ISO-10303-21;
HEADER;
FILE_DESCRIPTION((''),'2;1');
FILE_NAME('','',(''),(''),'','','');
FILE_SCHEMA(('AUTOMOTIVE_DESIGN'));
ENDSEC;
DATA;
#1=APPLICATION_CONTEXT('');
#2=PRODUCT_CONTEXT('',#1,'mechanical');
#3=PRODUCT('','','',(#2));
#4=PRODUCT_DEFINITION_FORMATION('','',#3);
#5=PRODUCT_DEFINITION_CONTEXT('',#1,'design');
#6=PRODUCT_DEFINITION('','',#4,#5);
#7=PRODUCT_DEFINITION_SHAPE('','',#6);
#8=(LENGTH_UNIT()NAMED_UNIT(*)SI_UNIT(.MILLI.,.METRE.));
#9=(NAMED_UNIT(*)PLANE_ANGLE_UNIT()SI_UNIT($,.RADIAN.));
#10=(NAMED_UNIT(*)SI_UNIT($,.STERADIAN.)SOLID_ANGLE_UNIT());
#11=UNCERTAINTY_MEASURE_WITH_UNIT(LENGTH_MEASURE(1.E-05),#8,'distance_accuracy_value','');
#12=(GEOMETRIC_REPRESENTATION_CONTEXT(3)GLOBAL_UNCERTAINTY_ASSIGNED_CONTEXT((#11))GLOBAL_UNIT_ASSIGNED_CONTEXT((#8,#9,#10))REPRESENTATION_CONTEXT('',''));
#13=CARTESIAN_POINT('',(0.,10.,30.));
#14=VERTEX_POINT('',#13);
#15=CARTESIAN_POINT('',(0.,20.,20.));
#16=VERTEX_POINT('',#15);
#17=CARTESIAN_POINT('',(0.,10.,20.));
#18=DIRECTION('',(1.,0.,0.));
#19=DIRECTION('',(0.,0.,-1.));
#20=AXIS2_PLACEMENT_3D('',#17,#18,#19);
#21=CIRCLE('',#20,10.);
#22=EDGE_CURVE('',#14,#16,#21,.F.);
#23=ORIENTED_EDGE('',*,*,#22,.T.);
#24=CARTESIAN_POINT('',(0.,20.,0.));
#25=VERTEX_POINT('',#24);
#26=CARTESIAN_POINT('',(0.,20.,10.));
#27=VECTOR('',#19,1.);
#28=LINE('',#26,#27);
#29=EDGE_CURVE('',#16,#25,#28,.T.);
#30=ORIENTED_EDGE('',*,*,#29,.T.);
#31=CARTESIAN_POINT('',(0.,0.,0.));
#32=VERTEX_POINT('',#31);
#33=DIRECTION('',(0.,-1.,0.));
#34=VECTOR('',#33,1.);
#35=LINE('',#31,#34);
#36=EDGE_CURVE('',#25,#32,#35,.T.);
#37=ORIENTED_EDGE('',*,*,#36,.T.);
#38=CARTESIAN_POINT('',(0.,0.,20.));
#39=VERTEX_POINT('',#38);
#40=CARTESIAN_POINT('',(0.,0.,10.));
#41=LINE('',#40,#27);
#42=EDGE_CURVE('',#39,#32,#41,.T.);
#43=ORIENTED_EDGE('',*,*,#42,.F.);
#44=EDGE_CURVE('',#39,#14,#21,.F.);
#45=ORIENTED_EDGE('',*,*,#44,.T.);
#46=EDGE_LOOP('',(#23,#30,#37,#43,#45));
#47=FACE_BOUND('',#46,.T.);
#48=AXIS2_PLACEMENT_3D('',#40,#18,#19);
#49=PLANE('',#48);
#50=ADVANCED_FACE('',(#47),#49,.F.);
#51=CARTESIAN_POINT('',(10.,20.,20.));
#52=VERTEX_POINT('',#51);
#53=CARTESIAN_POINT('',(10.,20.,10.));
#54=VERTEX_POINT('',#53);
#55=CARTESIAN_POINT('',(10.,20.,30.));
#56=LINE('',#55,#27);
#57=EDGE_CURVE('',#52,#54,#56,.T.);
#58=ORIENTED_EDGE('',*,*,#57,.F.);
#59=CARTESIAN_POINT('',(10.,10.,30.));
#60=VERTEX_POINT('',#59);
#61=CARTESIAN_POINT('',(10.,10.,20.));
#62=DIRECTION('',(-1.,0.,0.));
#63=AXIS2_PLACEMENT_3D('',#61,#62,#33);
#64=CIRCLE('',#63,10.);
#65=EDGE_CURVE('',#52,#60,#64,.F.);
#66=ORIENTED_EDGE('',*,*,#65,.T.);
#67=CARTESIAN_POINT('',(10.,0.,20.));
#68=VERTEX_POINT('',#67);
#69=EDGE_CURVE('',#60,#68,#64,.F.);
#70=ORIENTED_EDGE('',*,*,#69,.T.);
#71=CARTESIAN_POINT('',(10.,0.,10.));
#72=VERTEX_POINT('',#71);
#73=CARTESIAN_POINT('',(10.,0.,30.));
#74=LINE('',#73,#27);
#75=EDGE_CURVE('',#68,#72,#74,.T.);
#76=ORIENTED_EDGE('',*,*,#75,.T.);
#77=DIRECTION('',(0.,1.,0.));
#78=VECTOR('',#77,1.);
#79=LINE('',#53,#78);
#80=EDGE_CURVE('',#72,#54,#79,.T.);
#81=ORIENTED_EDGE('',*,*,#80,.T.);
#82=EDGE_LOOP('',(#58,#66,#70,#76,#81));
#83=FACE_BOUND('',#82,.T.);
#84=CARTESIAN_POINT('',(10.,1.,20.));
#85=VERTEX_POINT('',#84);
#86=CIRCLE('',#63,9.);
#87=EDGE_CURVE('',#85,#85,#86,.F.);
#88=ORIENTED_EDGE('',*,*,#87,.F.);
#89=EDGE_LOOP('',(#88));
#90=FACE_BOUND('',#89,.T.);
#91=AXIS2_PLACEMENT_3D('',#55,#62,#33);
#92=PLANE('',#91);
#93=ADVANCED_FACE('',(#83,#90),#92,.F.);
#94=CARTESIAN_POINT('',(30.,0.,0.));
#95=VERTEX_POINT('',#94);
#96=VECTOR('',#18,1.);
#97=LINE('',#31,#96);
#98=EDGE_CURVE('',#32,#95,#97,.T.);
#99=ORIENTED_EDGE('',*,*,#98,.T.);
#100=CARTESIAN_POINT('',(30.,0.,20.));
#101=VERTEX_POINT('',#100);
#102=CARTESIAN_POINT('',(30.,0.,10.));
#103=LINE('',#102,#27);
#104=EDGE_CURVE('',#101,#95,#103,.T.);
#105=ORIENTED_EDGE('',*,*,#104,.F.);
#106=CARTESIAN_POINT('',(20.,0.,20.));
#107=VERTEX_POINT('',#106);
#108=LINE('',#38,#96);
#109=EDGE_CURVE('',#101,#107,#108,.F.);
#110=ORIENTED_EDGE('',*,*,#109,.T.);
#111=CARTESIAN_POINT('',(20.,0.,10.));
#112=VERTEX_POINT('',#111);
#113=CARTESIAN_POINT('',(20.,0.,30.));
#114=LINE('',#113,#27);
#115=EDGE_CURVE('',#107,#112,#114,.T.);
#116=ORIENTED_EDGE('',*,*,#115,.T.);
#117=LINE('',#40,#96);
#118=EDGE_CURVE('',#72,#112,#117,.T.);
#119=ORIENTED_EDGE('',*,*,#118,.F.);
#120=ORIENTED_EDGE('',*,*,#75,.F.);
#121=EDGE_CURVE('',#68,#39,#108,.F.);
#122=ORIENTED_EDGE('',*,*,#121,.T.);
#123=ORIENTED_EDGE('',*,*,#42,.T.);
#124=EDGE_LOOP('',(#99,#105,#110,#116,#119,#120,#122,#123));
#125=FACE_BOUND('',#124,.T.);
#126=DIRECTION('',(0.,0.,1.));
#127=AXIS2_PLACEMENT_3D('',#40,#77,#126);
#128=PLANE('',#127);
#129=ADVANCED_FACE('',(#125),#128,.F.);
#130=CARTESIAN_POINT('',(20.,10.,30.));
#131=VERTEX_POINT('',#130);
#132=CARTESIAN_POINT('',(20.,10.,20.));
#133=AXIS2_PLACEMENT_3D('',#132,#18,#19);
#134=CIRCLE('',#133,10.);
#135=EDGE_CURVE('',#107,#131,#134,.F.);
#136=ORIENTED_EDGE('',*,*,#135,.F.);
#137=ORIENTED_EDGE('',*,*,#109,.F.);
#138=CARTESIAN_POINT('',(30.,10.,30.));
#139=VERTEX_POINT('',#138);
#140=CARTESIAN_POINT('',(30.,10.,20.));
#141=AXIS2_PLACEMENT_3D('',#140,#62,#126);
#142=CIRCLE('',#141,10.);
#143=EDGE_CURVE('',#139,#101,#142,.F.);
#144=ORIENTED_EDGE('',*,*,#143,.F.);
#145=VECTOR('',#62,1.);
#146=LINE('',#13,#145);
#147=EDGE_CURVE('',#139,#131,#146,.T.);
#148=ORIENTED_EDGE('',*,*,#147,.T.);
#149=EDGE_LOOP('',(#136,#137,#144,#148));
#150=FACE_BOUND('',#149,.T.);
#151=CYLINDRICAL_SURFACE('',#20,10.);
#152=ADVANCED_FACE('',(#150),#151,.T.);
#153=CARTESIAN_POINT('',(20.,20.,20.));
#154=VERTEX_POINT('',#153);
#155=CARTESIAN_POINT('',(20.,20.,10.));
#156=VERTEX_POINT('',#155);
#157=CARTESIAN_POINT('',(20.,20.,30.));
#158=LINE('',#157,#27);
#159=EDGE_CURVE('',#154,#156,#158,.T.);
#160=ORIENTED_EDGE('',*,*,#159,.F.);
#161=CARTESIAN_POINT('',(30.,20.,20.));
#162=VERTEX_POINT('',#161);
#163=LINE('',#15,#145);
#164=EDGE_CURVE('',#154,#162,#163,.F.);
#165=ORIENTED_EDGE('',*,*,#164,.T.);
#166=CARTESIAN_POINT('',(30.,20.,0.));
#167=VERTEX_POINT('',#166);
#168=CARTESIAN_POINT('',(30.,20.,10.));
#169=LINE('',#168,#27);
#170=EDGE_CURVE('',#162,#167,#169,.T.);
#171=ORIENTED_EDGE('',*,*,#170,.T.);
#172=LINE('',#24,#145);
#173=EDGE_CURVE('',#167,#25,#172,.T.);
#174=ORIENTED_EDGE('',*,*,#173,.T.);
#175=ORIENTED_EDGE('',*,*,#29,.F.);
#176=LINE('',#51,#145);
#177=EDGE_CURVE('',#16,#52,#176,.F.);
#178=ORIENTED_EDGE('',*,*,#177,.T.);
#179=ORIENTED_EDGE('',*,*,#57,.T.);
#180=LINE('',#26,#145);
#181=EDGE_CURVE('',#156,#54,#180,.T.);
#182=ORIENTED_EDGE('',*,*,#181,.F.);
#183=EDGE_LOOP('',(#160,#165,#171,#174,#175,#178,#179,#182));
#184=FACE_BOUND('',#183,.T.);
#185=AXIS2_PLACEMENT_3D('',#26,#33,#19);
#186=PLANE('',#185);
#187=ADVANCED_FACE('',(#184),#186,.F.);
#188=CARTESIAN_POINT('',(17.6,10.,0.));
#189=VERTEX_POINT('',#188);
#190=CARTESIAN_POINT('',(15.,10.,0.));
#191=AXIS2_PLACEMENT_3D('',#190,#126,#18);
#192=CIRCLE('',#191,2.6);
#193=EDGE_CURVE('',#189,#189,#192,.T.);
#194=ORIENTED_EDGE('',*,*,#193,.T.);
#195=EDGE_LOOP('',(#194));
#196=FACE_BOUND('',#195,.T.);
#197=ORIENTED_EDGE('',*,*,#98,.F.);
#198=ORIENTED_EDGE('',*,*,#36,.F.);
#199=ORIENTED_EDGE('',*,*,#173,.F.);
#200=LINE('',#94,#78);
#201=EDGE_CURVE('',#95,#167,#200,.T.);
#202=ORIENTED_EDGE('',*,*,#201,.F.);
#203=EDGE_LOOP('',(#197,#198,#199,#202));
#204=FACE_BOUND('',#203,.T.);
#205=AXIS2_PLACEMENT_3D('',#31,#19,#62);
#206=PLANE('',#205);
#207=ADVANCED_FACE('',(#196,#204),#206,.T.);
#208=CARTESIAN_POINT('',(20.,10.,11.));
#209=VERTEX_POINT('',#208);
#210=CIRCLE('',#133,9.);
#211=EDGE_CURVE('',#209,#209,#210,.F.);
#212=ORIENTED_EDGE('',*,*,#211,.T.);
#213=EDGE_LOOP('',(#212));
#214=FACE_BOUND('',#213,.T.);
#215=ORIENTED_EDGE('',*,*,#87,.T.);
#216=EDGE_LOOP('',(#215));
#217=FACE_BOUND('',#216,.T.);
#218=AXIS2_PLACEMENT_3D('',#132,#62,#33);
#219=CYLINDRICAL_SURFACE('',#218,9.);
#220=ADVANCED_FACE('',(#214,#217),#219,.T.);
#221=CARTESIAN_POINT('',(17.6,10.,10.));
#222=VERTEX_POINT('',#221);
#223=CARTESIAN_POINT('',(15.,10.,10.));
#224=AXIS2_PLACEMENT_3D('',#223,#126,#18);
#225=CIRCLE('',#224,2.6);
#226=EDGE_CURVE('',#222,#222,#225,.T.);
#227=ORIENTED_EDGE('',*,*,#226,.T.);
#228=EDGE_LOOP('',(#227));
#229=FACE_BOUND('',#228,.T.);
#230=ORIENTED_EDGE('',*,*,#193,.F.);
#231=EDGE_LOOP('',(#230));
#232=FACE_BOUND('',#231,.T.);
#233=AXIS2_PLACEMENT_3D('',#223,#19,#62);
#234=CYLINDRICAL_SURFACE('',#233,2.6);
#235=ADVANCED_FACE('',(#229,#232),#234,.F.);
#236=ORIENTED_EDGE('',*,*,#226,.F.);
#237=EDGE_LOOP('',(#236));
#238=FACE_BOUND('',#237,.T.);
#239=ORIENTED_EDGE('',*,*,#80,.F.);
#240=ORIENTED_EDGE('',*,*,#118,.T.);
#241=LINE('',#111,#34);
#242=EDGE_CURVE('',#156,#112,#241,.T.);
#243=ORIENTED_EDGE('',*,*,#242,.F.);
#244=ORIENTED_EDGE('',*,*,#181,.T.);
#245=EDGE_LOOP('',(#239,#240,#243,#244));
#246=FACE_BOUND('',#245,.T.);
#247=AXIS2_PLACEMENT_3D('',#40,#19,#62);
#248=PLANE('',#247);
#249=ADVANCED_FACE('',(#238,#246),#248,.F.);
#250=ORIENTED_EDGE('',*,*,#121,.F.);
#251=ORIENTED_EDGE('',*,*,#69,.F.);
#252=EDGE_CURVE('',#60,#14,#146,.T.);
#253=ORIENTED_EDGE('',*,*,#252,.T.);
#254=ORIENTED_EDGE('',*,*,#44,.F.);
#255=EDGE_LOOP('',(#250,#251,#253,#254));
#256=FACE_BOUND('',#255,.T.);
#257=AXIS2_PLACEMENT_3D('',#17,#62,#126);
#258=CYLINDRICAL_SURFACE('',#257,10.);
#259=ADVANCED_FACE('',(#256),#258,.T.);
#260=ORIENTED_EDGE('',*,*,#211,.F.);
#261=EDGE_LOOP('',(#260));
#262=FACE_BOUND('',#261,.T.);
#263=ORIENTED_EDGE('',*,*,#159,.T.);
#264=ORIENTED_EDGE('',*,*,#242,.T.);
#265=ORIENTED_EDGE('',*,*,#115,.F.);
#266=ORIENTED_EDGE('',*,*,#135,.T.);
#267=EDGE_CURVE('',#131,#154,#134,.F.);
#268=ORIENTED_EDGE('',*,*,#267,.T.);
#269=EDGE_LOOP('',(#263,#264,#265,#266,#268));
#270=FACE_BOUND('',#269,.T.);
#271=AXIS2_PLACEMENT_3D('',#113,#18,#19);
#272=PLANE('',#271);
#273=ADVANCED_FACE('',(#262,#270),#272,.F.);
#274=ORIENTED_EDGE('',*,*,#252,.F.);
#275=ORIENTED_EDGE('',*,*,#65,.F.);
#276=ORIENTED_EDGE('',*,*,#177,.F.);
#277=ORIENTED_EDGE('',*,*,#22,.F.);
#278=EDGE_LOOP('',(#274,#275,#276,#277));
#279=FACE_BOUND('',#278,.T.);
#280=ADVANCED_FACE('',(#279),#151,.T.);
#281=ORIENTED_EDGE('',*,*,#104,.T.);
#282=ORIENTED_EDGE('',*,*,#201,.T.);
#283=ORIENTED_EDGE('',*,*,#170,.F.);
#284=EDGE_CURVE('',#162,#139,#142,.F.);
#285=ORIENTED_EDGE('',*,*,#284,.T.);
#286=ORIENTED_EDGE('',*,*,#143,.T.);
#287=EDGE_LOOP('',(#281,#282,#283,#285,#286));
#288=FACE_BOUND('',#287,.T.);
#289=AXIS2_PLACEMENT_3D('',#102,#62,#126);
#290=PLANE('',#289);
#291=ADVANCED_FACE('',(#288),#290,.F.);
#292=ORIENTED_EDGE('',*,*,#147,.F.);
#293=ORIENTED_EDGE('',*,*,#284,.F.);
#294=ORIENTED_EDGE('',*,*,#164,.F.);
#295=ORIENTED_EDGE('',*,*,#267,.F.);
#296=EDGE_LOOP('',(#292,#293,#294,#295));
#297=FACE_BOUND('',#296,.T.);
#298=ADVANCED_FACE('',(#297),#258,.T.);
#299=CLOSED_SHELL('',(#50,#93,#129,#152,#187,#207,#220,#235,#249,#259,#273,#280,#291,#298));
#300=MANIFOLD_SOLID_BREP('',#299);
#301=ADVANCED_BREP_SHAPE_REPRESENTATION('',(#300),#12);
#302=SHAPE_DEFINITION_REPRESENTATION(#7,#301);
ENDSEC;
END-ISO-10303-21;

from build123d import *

# Parameters (mm, degrees)
SZKIC1_W                    = 30
SZKIC1_H                    = 20
SZKIC1_R                    = 2.6
DODANIE_WYCI_GNI_CIE1_DEPTH = 10
SZKIC2_W                    = 10
SZKIC2_H                    = 20
DODANIE_WYCI_GNI_CIE2_DEPTH = 20
SZKIC3_R                    = 9
DODANIE_WYCI_GNI_CIE3_DEPTH = 10
ZAOKR_GLENIE1_R             = 10


with BuildPart() as part:
    # Szkic1 → Dodanie-wyciągnięcie1 (new body)
    with BuildSketch(Plane.XY):
        with Locations((15, 10)):
            Rectangle(SZKIC1_W, SZKIC1_H)
        with Locations((15, 10)):
            Circle(SZKIC1_R, mode=Mode.SUBTRACT)
    extrude(amount=DODANIE_WYCI_GNI_CIE1_DEPTH)

    # Szkic2 → Dodanie-wyciągnięcie2 (add)
    with BuildSketch(Plane.XY.offset(10)):
        with Locations((5, 10)):
            Rectangle(SZKIC2_W, SZKIC2_H)
        with Locations((25, 10)):
            Rectangle(SZKIC2_W, SZKIC2_H)
    extrude(amount=DODANIE_WYCI_GNI_CIE2_DEPTH)

    # Szkic3 → Dodanie-wyciągnięcie3 (add)
    with BuildSketch(Plane(origin=(10, 0, 0), x_dir=(0, 0, -1), z_dir=(1, 0, 0))):
        with Locations(Location((-20, 10, 0), (0, 0, 270))):
            Circle(SZKIC3_R)
    extrude(amount=DODANIE_WYCI_GNI_CIE3_DEPTH)

    # Zaokrąglenie1
    zaokr_glenie1_edges = [part.edges().sort_by_distance(p)[0] for p in [
        (25, 0, 30),
        (5, 0, 30),
        (25, 20, 30),
        (5, 20, 30),
    ]]
    fillet(zaokr_glenie1_edges, radius=ZAOKR_GLENIE1_R - 0.0001)  # a hair under: the kernel refuses the full size


solid = part.part
